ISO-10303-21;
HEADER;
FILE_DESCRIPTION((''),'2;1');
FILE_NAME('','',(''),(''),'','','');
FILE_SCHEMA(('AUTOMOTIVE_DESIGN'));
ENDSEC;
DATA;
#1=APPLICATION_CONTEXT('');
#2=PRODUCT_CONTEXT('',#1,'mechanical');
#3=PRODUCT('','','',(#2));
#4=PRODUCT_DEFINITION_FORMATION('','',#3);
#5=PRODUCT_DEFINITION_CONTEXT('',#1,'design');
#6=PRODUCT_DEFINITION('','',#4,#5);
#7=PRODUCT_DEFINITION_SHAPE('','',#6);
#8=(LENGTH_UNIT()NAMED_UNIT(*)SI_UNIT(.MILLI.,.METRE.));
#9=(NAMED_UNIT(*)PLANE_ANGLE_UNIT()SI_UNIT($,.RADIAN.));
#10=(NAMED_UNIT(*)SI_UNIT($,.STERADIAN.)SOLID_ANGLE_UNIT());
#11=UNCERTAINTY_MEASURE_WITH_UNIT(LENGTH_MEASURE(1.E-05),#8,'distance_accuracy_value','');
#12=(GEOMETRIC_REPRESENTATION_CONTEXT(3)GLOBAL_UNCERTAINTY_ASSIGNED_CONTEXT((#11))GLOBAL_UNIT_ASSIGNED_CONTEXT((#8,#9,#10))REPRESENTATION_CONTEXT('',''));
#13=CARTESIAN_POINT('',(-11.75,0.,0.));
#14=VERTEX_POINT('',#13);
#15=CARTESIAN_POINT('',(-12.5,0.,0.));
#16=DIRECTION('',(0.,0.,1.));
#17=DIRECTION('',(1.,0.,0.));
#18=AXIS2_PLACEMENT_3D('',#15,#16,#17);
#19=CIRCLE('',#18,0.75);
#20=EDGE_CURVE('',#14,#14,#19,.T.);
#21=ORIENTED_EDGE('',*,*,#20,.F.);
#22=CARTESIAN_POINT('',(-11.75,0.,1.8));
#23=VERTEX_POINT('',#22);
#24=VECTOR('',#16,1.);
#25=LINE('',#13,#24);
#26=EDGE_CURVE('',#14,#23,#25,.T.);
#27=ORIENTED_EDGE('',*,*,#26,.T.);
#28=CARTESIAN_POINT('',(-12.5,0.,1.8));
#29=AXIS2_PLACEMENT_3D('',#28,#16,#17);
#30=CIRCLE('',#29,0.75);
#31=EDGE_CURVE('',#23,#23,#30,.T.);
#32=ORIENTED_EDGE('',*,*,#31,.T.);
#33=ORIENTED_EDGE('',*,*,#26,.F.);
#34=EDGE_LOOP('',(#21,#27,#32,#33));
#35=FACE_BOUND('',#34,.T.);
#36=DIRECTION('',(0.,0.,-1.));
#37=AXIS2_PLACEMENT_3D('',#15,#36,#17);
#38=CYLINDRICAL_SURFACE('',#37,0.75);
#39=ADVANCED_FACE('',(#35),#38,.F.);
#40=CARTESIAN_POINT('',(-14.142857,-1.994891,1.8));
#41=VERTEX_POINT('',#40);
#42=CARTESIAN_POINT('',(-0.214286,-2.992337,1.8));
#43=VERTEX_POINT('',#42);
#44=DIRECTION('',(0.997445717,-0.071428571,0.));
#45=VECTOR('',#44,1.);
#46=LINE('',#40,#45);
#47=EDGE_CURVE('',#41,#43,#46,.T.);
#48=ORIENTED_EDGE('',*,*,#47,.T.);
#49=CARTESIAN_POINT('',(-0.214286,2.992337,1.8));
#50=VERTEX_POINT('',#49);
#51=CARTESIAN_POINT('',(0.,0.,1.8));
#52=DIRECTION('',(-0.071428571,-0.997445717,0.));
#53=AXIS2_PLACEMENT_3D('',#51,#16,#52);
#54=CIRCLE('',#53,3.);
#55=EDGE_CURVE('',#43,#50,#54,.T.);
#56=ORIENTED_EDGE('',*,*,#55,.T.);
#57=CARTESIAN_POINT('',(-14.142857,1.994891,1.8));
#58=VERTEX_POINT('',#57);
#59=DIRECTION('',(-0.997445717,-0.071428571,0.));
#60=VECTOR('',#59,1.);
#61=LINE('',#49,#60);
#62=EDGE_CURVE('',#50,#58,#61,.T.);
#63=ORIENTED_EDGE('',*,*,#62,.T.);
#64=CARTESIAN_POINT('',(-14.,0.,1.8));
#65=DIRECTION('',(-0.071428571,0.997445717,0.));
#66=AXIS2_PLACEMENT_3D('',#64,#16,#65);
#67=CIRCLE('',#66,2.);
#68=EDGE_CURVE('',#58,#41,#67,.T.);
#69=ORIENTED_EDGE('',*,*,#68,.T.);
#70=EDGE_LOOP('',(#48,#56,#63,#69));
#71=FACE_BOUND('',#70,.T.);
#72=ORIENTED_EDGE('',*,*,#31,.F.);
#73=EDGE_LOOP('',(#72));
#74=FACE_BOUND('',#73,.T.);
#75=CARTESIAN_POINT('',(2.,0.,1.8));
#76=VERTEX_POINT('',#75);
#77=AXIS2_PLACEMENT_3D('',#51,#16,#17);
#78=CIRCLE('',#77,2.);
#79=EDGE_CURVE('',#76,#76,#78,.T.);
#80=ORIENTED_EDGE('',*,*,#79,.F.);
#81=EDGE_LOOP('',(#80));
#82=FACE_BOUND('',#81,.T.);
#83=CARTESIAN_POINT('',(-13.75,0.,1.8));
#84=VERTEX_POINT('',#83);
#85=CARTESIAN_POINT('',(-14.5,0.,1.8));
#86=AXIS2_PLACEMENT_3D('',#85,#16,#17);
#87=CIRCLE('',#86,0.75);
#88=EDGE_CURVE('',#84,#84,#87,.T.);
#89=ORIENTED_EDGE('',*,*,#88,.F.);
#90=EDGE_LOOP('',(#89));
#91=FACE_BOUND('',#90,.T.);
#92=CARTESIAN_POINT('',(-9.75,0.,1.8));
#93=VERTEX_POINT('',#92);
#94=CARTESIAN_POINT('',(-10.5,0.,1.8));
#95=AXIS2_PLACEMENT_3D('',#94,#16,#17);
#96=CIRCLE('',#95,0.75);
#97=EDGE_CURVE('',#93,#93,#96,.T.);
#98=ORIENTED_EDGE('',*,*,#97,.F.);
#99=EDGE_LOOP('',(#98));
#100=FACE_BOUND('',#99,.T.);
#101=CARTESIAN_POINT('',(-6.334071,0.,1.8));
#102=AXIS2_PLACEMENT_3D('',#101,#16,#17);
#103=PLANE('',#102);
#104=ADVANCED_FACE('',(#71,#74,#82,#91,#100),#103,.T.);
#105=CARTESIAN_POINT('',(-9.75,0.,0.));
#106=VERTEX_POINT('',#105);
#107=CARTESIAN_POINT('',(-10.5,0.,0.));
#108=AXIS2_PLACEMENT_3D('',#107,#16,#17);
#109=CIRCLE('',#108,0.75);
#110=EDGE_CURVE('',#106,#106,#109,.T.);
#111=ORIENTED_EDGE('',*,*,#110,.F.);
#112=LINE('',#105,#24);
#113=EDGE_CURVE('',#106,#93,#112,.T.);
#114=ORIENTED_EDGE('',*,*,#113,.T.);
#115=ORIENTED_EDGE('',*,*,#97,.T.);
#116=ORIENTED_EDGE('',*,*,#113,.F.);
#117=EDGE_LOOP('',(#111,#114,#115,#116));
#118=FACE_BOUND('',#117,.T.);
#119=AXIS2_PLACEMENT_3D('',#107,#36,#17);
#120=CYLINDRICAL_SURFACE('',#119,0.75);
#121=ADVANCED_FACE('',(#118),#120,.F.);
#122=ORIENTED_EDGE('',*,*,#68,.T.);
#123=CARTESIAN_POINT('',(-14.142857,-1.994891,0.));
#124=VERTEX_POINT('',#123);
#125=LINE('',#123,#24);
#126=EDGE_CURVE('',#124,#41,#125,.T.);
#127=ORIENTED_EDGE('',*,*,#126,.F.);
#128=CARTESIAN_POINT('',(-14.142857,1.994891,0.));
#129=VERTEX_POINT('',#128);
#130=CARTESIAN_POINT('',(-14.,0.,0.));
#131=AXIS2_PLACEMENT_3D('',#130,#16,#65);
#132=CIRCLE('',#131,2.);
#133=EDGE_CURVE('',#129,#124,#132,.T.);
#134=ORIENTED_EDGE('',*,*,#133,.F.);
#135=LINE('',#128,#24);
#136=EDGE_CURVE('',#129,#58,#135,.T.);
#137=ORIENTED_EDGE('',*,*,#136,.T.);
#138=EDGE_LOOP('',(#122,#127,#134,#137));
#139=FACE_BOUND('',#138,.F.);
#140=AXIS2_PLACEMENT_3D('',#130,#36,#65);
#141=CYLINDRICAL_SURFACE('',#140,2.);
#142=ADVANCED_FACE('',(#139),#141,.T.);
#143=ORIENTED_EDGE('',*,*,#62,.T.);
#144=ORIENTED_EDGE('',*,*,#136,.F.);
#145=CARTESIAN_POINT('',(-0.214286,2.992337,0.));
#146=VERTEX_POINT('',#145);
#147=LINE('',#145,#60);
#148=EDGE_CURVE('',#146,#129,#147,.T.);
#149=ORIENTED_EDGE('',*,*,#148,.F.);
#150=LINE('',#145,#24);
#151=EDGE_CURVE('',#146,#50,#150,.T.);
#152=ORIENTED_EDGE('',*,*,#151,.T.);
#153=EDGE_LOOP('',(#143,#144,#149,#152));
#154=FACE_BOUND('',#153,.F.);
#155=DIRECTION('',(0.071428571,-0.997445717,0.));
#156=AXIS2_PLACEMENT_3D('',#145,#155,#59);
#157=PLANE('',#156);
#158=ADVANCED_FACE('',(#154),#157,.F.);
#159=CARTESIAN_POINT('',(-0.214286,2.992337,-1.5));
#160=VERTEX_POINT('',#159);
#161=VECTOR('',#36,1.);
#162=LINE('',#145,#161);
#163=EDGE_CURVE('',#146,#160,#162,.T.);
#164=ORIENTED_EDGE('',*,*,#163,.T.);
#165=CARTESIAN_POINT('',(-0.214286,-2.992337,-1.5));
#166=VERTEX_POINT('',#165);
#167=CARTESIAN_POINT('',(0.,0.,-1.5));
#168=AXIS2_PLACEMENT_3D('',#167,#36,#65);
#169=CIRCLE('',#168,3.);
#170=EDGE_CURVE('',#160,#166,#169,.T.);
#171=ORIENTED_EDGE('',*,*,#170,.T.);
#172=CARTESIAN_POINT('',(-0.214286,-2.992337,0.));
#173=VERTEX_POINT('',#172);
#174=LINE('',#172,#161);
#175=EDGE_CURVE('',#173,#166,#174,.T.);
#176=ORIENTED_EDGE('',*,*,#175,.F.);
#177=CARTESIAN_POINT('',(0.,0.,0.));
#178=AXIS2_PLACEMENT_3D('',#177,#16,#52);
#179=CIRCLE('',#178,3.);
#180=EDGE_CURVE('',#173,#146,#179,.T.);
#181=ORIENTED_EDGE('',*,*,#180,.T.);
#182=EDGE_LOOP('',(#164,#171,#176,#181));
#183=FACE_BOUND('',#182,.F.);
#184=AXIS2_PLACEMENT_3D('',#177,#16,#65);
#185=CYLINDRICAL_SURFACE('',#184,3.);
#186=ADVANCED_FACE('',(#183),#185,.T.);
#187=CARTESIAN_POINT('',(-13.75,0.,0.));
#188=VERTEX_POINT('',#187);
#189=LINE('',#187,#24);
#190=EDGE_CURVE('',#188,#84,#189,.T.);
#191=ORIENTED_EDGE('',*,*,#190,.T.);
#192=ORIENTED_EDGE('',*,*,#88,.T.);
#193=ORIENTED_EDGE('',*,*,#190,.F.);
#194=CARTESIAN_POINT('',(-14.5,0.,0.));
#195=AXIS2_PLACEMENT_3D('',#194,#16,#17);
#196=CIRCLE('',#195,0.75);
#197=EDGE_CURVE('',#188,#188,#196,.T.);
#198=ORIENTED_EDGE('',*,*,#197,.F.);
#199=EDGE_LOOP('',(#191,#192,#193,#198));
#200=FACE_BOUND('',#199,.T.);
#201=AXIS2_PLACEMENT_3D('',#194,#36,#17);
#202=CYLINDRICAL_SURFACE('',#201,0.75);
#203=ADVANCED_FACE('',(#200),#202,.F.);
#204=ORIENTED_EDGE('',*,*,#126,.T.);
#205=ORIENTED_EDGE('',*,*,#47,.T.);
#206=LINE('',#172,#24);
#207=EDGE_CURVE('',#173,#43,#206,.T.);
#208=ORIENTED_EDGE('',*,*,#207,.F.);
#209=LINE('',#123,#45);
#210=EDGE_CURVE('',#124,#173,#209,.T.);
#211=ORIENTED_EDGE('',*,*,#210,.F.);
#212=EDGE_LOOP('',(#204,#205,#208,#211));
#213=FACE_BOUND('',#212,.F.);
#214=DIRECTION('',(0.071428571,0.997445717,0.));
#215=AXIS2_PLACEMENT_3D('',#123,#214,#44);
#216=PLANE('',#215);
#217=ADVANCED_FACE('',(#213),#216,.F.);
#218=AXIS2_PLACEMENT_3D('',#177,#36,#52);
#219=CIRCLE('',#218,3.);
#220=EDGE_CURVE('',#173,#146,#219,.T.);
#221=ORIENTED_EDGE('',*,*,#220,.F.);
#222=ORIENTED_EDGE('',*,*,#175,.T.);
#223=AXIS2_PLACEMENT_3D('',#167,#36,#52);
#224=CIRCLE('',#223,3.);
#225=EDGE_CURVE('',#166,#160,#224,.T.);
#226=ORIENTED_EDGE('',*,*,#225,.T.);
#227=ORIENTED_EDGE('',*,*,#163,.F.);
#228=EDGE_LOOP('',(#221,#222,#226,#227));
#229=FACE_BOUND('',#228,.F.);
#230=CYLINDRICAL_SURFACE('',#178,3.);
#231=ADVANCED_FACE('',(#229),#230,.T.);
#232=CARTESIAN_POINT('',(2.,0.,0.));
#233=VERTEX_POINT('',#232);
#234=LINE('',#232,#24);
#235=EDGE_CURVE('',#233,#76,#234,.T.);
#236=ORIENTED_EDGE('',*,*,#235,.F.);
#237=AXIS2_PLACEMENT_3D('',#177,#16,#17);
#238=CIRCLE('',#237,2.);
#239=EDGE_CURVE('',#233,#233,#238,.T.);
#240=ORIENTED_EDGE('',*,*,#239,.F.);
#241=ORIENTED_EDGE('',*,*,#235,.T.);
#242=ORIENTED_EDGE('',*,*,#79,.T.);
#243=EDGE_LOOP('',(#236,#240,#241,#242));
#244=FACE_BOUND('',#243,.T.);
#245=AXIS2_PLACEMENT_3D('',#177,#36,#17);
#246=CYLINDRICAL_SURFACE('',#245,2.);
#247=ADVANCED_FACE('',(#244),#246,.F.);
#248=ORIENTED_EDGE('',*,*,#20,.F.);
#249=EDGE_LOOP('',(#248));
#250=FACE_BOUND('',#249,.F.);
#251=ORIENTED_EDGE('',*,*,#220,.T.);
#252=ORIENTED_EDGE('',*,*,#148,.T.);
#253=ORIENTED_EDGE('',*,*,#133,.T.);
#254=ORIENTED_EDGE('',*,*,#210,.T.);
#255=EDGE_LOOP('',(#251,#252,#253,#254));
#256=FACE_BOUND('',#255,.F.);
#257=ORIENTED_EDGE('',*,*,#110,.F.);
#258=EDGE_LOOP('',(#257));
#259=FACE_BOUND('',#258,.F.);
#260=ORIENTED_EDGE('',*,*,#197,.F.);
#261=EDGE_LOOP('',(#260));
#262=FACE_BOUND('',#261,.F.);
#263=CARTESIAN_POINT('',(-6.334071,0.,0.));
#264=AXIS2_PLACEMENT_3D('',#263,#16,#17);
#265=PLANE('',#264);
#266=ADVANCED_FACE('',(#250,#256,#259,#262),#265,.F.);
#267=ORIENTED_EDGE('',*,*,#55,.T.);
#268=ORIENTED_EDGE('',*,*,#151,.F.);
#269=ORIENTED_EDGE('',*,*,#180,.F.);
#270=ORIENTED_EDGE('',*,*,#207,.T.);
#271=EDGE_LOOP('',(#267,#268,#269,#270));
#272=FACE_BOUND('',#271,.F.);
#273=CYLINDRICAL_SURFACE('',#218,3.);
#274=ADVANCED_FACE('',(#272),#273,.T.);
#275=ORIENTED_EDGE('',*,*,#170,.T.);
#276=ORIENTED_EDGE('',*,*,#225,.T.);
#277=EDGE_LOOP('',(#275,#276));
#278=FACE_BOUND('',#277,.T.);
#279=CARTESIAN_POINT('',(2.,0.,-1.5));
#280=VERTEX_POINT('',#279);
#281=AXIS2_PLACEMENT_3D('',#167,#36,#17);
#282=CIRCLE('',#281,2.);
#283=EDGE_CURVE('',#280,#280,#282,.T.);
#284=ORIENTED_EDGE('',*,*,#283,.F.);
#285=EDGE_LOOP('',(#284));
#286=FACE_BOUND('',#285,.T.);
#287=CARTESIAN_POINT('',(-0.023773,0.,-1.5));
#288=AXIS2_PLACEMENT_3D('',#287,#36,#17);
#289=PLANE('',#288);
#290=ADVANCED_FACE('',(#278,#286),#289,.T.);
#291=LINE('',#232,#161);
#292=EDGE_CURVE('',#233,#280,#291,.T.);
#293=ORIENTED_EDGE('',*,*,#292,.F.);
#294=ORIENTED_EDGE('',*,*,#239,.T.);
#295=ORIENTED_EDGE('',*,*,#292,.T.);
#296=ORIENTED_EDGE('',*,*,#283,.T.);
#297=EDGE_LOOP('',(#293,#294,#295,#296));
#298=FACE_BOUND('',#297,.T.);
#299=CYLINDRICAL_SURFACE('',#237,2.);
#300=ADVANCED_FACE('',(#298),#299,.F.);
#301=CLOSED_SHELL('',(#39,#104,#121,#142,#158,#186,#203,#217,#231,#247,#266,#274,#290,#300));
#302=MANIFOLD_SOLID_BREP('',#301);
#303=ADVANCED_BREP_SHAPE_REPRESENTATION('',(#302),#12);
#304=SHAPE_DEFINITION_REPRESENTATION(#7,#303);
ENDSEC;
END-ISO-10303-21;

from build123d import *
from build123d import SkipClean  # not in build123d's __all__

# Parameters (mm, degrees)
F0_R     = 0.75
F0_R_2   = 2
F1_DEPTH = 1.8
F2_R     = 2
F3_DEPTH = 1.5


with BuildPart() as f1:
    # F0 (on Top) → F1 (new body)
    with BuildSketch(Plane.XY):
        with BuildLine():
            Line((-14.1428571429, -1.9948914348), (-0.2142857143, -2.9923371522))
            ThreePointArc((-0.2142857143, -2.9923371522), (3, 0), (-0.2142857143, 2.9923371522))
            Line((-0.2142857143, 2.9923371522), (-14.1428571429, 1.9948914348))
            ThreePointArc((-14.1428571429, 1.9948914348), (-16, 0), (-14.1428571429, -1.9948914348))
        make_face()
        with Locations((-14.5, 0)):
            Circle(F0_R, mode=Mode.SUBTRACT)
        with Locations((-12.5, 0)):
            Circle(F0_R, mode=Mode.SUBTRACT)
        with Locations((-10.5, 0)):
            Circle(F0_R, mode=Mode.SUBTRACT)
        Circle(F0_R_2, mode=Mode.SUBTRACT)
    extrude(amount=F1_DEPTH)

    # F2 (on face) → F3 (join)
    with BuildSketch(Plane(origin=(0, 0, 0), x_dir=(1, 0, 0), z_dir=(0, 0, -1))):
        with BuildLine():
            ThreePointArc((-0.2142857143, -2.9923371522), (3, 0), (-0.2142857143, 2.9923371522))
            ThreePointArc((-0.2142857143, 2.9923371522), (-3, 0), (-0.2142857143, -2.9923371522))
        make_face()
        Circle(F2_R, mode=Mode.SUBTRACT)
    with SkipClean():  # cleaning this boolean's faces spoils the solid; the shape is the same uncleaned
        extrude(amount=F3_DEPTH)


solid = f1.part
